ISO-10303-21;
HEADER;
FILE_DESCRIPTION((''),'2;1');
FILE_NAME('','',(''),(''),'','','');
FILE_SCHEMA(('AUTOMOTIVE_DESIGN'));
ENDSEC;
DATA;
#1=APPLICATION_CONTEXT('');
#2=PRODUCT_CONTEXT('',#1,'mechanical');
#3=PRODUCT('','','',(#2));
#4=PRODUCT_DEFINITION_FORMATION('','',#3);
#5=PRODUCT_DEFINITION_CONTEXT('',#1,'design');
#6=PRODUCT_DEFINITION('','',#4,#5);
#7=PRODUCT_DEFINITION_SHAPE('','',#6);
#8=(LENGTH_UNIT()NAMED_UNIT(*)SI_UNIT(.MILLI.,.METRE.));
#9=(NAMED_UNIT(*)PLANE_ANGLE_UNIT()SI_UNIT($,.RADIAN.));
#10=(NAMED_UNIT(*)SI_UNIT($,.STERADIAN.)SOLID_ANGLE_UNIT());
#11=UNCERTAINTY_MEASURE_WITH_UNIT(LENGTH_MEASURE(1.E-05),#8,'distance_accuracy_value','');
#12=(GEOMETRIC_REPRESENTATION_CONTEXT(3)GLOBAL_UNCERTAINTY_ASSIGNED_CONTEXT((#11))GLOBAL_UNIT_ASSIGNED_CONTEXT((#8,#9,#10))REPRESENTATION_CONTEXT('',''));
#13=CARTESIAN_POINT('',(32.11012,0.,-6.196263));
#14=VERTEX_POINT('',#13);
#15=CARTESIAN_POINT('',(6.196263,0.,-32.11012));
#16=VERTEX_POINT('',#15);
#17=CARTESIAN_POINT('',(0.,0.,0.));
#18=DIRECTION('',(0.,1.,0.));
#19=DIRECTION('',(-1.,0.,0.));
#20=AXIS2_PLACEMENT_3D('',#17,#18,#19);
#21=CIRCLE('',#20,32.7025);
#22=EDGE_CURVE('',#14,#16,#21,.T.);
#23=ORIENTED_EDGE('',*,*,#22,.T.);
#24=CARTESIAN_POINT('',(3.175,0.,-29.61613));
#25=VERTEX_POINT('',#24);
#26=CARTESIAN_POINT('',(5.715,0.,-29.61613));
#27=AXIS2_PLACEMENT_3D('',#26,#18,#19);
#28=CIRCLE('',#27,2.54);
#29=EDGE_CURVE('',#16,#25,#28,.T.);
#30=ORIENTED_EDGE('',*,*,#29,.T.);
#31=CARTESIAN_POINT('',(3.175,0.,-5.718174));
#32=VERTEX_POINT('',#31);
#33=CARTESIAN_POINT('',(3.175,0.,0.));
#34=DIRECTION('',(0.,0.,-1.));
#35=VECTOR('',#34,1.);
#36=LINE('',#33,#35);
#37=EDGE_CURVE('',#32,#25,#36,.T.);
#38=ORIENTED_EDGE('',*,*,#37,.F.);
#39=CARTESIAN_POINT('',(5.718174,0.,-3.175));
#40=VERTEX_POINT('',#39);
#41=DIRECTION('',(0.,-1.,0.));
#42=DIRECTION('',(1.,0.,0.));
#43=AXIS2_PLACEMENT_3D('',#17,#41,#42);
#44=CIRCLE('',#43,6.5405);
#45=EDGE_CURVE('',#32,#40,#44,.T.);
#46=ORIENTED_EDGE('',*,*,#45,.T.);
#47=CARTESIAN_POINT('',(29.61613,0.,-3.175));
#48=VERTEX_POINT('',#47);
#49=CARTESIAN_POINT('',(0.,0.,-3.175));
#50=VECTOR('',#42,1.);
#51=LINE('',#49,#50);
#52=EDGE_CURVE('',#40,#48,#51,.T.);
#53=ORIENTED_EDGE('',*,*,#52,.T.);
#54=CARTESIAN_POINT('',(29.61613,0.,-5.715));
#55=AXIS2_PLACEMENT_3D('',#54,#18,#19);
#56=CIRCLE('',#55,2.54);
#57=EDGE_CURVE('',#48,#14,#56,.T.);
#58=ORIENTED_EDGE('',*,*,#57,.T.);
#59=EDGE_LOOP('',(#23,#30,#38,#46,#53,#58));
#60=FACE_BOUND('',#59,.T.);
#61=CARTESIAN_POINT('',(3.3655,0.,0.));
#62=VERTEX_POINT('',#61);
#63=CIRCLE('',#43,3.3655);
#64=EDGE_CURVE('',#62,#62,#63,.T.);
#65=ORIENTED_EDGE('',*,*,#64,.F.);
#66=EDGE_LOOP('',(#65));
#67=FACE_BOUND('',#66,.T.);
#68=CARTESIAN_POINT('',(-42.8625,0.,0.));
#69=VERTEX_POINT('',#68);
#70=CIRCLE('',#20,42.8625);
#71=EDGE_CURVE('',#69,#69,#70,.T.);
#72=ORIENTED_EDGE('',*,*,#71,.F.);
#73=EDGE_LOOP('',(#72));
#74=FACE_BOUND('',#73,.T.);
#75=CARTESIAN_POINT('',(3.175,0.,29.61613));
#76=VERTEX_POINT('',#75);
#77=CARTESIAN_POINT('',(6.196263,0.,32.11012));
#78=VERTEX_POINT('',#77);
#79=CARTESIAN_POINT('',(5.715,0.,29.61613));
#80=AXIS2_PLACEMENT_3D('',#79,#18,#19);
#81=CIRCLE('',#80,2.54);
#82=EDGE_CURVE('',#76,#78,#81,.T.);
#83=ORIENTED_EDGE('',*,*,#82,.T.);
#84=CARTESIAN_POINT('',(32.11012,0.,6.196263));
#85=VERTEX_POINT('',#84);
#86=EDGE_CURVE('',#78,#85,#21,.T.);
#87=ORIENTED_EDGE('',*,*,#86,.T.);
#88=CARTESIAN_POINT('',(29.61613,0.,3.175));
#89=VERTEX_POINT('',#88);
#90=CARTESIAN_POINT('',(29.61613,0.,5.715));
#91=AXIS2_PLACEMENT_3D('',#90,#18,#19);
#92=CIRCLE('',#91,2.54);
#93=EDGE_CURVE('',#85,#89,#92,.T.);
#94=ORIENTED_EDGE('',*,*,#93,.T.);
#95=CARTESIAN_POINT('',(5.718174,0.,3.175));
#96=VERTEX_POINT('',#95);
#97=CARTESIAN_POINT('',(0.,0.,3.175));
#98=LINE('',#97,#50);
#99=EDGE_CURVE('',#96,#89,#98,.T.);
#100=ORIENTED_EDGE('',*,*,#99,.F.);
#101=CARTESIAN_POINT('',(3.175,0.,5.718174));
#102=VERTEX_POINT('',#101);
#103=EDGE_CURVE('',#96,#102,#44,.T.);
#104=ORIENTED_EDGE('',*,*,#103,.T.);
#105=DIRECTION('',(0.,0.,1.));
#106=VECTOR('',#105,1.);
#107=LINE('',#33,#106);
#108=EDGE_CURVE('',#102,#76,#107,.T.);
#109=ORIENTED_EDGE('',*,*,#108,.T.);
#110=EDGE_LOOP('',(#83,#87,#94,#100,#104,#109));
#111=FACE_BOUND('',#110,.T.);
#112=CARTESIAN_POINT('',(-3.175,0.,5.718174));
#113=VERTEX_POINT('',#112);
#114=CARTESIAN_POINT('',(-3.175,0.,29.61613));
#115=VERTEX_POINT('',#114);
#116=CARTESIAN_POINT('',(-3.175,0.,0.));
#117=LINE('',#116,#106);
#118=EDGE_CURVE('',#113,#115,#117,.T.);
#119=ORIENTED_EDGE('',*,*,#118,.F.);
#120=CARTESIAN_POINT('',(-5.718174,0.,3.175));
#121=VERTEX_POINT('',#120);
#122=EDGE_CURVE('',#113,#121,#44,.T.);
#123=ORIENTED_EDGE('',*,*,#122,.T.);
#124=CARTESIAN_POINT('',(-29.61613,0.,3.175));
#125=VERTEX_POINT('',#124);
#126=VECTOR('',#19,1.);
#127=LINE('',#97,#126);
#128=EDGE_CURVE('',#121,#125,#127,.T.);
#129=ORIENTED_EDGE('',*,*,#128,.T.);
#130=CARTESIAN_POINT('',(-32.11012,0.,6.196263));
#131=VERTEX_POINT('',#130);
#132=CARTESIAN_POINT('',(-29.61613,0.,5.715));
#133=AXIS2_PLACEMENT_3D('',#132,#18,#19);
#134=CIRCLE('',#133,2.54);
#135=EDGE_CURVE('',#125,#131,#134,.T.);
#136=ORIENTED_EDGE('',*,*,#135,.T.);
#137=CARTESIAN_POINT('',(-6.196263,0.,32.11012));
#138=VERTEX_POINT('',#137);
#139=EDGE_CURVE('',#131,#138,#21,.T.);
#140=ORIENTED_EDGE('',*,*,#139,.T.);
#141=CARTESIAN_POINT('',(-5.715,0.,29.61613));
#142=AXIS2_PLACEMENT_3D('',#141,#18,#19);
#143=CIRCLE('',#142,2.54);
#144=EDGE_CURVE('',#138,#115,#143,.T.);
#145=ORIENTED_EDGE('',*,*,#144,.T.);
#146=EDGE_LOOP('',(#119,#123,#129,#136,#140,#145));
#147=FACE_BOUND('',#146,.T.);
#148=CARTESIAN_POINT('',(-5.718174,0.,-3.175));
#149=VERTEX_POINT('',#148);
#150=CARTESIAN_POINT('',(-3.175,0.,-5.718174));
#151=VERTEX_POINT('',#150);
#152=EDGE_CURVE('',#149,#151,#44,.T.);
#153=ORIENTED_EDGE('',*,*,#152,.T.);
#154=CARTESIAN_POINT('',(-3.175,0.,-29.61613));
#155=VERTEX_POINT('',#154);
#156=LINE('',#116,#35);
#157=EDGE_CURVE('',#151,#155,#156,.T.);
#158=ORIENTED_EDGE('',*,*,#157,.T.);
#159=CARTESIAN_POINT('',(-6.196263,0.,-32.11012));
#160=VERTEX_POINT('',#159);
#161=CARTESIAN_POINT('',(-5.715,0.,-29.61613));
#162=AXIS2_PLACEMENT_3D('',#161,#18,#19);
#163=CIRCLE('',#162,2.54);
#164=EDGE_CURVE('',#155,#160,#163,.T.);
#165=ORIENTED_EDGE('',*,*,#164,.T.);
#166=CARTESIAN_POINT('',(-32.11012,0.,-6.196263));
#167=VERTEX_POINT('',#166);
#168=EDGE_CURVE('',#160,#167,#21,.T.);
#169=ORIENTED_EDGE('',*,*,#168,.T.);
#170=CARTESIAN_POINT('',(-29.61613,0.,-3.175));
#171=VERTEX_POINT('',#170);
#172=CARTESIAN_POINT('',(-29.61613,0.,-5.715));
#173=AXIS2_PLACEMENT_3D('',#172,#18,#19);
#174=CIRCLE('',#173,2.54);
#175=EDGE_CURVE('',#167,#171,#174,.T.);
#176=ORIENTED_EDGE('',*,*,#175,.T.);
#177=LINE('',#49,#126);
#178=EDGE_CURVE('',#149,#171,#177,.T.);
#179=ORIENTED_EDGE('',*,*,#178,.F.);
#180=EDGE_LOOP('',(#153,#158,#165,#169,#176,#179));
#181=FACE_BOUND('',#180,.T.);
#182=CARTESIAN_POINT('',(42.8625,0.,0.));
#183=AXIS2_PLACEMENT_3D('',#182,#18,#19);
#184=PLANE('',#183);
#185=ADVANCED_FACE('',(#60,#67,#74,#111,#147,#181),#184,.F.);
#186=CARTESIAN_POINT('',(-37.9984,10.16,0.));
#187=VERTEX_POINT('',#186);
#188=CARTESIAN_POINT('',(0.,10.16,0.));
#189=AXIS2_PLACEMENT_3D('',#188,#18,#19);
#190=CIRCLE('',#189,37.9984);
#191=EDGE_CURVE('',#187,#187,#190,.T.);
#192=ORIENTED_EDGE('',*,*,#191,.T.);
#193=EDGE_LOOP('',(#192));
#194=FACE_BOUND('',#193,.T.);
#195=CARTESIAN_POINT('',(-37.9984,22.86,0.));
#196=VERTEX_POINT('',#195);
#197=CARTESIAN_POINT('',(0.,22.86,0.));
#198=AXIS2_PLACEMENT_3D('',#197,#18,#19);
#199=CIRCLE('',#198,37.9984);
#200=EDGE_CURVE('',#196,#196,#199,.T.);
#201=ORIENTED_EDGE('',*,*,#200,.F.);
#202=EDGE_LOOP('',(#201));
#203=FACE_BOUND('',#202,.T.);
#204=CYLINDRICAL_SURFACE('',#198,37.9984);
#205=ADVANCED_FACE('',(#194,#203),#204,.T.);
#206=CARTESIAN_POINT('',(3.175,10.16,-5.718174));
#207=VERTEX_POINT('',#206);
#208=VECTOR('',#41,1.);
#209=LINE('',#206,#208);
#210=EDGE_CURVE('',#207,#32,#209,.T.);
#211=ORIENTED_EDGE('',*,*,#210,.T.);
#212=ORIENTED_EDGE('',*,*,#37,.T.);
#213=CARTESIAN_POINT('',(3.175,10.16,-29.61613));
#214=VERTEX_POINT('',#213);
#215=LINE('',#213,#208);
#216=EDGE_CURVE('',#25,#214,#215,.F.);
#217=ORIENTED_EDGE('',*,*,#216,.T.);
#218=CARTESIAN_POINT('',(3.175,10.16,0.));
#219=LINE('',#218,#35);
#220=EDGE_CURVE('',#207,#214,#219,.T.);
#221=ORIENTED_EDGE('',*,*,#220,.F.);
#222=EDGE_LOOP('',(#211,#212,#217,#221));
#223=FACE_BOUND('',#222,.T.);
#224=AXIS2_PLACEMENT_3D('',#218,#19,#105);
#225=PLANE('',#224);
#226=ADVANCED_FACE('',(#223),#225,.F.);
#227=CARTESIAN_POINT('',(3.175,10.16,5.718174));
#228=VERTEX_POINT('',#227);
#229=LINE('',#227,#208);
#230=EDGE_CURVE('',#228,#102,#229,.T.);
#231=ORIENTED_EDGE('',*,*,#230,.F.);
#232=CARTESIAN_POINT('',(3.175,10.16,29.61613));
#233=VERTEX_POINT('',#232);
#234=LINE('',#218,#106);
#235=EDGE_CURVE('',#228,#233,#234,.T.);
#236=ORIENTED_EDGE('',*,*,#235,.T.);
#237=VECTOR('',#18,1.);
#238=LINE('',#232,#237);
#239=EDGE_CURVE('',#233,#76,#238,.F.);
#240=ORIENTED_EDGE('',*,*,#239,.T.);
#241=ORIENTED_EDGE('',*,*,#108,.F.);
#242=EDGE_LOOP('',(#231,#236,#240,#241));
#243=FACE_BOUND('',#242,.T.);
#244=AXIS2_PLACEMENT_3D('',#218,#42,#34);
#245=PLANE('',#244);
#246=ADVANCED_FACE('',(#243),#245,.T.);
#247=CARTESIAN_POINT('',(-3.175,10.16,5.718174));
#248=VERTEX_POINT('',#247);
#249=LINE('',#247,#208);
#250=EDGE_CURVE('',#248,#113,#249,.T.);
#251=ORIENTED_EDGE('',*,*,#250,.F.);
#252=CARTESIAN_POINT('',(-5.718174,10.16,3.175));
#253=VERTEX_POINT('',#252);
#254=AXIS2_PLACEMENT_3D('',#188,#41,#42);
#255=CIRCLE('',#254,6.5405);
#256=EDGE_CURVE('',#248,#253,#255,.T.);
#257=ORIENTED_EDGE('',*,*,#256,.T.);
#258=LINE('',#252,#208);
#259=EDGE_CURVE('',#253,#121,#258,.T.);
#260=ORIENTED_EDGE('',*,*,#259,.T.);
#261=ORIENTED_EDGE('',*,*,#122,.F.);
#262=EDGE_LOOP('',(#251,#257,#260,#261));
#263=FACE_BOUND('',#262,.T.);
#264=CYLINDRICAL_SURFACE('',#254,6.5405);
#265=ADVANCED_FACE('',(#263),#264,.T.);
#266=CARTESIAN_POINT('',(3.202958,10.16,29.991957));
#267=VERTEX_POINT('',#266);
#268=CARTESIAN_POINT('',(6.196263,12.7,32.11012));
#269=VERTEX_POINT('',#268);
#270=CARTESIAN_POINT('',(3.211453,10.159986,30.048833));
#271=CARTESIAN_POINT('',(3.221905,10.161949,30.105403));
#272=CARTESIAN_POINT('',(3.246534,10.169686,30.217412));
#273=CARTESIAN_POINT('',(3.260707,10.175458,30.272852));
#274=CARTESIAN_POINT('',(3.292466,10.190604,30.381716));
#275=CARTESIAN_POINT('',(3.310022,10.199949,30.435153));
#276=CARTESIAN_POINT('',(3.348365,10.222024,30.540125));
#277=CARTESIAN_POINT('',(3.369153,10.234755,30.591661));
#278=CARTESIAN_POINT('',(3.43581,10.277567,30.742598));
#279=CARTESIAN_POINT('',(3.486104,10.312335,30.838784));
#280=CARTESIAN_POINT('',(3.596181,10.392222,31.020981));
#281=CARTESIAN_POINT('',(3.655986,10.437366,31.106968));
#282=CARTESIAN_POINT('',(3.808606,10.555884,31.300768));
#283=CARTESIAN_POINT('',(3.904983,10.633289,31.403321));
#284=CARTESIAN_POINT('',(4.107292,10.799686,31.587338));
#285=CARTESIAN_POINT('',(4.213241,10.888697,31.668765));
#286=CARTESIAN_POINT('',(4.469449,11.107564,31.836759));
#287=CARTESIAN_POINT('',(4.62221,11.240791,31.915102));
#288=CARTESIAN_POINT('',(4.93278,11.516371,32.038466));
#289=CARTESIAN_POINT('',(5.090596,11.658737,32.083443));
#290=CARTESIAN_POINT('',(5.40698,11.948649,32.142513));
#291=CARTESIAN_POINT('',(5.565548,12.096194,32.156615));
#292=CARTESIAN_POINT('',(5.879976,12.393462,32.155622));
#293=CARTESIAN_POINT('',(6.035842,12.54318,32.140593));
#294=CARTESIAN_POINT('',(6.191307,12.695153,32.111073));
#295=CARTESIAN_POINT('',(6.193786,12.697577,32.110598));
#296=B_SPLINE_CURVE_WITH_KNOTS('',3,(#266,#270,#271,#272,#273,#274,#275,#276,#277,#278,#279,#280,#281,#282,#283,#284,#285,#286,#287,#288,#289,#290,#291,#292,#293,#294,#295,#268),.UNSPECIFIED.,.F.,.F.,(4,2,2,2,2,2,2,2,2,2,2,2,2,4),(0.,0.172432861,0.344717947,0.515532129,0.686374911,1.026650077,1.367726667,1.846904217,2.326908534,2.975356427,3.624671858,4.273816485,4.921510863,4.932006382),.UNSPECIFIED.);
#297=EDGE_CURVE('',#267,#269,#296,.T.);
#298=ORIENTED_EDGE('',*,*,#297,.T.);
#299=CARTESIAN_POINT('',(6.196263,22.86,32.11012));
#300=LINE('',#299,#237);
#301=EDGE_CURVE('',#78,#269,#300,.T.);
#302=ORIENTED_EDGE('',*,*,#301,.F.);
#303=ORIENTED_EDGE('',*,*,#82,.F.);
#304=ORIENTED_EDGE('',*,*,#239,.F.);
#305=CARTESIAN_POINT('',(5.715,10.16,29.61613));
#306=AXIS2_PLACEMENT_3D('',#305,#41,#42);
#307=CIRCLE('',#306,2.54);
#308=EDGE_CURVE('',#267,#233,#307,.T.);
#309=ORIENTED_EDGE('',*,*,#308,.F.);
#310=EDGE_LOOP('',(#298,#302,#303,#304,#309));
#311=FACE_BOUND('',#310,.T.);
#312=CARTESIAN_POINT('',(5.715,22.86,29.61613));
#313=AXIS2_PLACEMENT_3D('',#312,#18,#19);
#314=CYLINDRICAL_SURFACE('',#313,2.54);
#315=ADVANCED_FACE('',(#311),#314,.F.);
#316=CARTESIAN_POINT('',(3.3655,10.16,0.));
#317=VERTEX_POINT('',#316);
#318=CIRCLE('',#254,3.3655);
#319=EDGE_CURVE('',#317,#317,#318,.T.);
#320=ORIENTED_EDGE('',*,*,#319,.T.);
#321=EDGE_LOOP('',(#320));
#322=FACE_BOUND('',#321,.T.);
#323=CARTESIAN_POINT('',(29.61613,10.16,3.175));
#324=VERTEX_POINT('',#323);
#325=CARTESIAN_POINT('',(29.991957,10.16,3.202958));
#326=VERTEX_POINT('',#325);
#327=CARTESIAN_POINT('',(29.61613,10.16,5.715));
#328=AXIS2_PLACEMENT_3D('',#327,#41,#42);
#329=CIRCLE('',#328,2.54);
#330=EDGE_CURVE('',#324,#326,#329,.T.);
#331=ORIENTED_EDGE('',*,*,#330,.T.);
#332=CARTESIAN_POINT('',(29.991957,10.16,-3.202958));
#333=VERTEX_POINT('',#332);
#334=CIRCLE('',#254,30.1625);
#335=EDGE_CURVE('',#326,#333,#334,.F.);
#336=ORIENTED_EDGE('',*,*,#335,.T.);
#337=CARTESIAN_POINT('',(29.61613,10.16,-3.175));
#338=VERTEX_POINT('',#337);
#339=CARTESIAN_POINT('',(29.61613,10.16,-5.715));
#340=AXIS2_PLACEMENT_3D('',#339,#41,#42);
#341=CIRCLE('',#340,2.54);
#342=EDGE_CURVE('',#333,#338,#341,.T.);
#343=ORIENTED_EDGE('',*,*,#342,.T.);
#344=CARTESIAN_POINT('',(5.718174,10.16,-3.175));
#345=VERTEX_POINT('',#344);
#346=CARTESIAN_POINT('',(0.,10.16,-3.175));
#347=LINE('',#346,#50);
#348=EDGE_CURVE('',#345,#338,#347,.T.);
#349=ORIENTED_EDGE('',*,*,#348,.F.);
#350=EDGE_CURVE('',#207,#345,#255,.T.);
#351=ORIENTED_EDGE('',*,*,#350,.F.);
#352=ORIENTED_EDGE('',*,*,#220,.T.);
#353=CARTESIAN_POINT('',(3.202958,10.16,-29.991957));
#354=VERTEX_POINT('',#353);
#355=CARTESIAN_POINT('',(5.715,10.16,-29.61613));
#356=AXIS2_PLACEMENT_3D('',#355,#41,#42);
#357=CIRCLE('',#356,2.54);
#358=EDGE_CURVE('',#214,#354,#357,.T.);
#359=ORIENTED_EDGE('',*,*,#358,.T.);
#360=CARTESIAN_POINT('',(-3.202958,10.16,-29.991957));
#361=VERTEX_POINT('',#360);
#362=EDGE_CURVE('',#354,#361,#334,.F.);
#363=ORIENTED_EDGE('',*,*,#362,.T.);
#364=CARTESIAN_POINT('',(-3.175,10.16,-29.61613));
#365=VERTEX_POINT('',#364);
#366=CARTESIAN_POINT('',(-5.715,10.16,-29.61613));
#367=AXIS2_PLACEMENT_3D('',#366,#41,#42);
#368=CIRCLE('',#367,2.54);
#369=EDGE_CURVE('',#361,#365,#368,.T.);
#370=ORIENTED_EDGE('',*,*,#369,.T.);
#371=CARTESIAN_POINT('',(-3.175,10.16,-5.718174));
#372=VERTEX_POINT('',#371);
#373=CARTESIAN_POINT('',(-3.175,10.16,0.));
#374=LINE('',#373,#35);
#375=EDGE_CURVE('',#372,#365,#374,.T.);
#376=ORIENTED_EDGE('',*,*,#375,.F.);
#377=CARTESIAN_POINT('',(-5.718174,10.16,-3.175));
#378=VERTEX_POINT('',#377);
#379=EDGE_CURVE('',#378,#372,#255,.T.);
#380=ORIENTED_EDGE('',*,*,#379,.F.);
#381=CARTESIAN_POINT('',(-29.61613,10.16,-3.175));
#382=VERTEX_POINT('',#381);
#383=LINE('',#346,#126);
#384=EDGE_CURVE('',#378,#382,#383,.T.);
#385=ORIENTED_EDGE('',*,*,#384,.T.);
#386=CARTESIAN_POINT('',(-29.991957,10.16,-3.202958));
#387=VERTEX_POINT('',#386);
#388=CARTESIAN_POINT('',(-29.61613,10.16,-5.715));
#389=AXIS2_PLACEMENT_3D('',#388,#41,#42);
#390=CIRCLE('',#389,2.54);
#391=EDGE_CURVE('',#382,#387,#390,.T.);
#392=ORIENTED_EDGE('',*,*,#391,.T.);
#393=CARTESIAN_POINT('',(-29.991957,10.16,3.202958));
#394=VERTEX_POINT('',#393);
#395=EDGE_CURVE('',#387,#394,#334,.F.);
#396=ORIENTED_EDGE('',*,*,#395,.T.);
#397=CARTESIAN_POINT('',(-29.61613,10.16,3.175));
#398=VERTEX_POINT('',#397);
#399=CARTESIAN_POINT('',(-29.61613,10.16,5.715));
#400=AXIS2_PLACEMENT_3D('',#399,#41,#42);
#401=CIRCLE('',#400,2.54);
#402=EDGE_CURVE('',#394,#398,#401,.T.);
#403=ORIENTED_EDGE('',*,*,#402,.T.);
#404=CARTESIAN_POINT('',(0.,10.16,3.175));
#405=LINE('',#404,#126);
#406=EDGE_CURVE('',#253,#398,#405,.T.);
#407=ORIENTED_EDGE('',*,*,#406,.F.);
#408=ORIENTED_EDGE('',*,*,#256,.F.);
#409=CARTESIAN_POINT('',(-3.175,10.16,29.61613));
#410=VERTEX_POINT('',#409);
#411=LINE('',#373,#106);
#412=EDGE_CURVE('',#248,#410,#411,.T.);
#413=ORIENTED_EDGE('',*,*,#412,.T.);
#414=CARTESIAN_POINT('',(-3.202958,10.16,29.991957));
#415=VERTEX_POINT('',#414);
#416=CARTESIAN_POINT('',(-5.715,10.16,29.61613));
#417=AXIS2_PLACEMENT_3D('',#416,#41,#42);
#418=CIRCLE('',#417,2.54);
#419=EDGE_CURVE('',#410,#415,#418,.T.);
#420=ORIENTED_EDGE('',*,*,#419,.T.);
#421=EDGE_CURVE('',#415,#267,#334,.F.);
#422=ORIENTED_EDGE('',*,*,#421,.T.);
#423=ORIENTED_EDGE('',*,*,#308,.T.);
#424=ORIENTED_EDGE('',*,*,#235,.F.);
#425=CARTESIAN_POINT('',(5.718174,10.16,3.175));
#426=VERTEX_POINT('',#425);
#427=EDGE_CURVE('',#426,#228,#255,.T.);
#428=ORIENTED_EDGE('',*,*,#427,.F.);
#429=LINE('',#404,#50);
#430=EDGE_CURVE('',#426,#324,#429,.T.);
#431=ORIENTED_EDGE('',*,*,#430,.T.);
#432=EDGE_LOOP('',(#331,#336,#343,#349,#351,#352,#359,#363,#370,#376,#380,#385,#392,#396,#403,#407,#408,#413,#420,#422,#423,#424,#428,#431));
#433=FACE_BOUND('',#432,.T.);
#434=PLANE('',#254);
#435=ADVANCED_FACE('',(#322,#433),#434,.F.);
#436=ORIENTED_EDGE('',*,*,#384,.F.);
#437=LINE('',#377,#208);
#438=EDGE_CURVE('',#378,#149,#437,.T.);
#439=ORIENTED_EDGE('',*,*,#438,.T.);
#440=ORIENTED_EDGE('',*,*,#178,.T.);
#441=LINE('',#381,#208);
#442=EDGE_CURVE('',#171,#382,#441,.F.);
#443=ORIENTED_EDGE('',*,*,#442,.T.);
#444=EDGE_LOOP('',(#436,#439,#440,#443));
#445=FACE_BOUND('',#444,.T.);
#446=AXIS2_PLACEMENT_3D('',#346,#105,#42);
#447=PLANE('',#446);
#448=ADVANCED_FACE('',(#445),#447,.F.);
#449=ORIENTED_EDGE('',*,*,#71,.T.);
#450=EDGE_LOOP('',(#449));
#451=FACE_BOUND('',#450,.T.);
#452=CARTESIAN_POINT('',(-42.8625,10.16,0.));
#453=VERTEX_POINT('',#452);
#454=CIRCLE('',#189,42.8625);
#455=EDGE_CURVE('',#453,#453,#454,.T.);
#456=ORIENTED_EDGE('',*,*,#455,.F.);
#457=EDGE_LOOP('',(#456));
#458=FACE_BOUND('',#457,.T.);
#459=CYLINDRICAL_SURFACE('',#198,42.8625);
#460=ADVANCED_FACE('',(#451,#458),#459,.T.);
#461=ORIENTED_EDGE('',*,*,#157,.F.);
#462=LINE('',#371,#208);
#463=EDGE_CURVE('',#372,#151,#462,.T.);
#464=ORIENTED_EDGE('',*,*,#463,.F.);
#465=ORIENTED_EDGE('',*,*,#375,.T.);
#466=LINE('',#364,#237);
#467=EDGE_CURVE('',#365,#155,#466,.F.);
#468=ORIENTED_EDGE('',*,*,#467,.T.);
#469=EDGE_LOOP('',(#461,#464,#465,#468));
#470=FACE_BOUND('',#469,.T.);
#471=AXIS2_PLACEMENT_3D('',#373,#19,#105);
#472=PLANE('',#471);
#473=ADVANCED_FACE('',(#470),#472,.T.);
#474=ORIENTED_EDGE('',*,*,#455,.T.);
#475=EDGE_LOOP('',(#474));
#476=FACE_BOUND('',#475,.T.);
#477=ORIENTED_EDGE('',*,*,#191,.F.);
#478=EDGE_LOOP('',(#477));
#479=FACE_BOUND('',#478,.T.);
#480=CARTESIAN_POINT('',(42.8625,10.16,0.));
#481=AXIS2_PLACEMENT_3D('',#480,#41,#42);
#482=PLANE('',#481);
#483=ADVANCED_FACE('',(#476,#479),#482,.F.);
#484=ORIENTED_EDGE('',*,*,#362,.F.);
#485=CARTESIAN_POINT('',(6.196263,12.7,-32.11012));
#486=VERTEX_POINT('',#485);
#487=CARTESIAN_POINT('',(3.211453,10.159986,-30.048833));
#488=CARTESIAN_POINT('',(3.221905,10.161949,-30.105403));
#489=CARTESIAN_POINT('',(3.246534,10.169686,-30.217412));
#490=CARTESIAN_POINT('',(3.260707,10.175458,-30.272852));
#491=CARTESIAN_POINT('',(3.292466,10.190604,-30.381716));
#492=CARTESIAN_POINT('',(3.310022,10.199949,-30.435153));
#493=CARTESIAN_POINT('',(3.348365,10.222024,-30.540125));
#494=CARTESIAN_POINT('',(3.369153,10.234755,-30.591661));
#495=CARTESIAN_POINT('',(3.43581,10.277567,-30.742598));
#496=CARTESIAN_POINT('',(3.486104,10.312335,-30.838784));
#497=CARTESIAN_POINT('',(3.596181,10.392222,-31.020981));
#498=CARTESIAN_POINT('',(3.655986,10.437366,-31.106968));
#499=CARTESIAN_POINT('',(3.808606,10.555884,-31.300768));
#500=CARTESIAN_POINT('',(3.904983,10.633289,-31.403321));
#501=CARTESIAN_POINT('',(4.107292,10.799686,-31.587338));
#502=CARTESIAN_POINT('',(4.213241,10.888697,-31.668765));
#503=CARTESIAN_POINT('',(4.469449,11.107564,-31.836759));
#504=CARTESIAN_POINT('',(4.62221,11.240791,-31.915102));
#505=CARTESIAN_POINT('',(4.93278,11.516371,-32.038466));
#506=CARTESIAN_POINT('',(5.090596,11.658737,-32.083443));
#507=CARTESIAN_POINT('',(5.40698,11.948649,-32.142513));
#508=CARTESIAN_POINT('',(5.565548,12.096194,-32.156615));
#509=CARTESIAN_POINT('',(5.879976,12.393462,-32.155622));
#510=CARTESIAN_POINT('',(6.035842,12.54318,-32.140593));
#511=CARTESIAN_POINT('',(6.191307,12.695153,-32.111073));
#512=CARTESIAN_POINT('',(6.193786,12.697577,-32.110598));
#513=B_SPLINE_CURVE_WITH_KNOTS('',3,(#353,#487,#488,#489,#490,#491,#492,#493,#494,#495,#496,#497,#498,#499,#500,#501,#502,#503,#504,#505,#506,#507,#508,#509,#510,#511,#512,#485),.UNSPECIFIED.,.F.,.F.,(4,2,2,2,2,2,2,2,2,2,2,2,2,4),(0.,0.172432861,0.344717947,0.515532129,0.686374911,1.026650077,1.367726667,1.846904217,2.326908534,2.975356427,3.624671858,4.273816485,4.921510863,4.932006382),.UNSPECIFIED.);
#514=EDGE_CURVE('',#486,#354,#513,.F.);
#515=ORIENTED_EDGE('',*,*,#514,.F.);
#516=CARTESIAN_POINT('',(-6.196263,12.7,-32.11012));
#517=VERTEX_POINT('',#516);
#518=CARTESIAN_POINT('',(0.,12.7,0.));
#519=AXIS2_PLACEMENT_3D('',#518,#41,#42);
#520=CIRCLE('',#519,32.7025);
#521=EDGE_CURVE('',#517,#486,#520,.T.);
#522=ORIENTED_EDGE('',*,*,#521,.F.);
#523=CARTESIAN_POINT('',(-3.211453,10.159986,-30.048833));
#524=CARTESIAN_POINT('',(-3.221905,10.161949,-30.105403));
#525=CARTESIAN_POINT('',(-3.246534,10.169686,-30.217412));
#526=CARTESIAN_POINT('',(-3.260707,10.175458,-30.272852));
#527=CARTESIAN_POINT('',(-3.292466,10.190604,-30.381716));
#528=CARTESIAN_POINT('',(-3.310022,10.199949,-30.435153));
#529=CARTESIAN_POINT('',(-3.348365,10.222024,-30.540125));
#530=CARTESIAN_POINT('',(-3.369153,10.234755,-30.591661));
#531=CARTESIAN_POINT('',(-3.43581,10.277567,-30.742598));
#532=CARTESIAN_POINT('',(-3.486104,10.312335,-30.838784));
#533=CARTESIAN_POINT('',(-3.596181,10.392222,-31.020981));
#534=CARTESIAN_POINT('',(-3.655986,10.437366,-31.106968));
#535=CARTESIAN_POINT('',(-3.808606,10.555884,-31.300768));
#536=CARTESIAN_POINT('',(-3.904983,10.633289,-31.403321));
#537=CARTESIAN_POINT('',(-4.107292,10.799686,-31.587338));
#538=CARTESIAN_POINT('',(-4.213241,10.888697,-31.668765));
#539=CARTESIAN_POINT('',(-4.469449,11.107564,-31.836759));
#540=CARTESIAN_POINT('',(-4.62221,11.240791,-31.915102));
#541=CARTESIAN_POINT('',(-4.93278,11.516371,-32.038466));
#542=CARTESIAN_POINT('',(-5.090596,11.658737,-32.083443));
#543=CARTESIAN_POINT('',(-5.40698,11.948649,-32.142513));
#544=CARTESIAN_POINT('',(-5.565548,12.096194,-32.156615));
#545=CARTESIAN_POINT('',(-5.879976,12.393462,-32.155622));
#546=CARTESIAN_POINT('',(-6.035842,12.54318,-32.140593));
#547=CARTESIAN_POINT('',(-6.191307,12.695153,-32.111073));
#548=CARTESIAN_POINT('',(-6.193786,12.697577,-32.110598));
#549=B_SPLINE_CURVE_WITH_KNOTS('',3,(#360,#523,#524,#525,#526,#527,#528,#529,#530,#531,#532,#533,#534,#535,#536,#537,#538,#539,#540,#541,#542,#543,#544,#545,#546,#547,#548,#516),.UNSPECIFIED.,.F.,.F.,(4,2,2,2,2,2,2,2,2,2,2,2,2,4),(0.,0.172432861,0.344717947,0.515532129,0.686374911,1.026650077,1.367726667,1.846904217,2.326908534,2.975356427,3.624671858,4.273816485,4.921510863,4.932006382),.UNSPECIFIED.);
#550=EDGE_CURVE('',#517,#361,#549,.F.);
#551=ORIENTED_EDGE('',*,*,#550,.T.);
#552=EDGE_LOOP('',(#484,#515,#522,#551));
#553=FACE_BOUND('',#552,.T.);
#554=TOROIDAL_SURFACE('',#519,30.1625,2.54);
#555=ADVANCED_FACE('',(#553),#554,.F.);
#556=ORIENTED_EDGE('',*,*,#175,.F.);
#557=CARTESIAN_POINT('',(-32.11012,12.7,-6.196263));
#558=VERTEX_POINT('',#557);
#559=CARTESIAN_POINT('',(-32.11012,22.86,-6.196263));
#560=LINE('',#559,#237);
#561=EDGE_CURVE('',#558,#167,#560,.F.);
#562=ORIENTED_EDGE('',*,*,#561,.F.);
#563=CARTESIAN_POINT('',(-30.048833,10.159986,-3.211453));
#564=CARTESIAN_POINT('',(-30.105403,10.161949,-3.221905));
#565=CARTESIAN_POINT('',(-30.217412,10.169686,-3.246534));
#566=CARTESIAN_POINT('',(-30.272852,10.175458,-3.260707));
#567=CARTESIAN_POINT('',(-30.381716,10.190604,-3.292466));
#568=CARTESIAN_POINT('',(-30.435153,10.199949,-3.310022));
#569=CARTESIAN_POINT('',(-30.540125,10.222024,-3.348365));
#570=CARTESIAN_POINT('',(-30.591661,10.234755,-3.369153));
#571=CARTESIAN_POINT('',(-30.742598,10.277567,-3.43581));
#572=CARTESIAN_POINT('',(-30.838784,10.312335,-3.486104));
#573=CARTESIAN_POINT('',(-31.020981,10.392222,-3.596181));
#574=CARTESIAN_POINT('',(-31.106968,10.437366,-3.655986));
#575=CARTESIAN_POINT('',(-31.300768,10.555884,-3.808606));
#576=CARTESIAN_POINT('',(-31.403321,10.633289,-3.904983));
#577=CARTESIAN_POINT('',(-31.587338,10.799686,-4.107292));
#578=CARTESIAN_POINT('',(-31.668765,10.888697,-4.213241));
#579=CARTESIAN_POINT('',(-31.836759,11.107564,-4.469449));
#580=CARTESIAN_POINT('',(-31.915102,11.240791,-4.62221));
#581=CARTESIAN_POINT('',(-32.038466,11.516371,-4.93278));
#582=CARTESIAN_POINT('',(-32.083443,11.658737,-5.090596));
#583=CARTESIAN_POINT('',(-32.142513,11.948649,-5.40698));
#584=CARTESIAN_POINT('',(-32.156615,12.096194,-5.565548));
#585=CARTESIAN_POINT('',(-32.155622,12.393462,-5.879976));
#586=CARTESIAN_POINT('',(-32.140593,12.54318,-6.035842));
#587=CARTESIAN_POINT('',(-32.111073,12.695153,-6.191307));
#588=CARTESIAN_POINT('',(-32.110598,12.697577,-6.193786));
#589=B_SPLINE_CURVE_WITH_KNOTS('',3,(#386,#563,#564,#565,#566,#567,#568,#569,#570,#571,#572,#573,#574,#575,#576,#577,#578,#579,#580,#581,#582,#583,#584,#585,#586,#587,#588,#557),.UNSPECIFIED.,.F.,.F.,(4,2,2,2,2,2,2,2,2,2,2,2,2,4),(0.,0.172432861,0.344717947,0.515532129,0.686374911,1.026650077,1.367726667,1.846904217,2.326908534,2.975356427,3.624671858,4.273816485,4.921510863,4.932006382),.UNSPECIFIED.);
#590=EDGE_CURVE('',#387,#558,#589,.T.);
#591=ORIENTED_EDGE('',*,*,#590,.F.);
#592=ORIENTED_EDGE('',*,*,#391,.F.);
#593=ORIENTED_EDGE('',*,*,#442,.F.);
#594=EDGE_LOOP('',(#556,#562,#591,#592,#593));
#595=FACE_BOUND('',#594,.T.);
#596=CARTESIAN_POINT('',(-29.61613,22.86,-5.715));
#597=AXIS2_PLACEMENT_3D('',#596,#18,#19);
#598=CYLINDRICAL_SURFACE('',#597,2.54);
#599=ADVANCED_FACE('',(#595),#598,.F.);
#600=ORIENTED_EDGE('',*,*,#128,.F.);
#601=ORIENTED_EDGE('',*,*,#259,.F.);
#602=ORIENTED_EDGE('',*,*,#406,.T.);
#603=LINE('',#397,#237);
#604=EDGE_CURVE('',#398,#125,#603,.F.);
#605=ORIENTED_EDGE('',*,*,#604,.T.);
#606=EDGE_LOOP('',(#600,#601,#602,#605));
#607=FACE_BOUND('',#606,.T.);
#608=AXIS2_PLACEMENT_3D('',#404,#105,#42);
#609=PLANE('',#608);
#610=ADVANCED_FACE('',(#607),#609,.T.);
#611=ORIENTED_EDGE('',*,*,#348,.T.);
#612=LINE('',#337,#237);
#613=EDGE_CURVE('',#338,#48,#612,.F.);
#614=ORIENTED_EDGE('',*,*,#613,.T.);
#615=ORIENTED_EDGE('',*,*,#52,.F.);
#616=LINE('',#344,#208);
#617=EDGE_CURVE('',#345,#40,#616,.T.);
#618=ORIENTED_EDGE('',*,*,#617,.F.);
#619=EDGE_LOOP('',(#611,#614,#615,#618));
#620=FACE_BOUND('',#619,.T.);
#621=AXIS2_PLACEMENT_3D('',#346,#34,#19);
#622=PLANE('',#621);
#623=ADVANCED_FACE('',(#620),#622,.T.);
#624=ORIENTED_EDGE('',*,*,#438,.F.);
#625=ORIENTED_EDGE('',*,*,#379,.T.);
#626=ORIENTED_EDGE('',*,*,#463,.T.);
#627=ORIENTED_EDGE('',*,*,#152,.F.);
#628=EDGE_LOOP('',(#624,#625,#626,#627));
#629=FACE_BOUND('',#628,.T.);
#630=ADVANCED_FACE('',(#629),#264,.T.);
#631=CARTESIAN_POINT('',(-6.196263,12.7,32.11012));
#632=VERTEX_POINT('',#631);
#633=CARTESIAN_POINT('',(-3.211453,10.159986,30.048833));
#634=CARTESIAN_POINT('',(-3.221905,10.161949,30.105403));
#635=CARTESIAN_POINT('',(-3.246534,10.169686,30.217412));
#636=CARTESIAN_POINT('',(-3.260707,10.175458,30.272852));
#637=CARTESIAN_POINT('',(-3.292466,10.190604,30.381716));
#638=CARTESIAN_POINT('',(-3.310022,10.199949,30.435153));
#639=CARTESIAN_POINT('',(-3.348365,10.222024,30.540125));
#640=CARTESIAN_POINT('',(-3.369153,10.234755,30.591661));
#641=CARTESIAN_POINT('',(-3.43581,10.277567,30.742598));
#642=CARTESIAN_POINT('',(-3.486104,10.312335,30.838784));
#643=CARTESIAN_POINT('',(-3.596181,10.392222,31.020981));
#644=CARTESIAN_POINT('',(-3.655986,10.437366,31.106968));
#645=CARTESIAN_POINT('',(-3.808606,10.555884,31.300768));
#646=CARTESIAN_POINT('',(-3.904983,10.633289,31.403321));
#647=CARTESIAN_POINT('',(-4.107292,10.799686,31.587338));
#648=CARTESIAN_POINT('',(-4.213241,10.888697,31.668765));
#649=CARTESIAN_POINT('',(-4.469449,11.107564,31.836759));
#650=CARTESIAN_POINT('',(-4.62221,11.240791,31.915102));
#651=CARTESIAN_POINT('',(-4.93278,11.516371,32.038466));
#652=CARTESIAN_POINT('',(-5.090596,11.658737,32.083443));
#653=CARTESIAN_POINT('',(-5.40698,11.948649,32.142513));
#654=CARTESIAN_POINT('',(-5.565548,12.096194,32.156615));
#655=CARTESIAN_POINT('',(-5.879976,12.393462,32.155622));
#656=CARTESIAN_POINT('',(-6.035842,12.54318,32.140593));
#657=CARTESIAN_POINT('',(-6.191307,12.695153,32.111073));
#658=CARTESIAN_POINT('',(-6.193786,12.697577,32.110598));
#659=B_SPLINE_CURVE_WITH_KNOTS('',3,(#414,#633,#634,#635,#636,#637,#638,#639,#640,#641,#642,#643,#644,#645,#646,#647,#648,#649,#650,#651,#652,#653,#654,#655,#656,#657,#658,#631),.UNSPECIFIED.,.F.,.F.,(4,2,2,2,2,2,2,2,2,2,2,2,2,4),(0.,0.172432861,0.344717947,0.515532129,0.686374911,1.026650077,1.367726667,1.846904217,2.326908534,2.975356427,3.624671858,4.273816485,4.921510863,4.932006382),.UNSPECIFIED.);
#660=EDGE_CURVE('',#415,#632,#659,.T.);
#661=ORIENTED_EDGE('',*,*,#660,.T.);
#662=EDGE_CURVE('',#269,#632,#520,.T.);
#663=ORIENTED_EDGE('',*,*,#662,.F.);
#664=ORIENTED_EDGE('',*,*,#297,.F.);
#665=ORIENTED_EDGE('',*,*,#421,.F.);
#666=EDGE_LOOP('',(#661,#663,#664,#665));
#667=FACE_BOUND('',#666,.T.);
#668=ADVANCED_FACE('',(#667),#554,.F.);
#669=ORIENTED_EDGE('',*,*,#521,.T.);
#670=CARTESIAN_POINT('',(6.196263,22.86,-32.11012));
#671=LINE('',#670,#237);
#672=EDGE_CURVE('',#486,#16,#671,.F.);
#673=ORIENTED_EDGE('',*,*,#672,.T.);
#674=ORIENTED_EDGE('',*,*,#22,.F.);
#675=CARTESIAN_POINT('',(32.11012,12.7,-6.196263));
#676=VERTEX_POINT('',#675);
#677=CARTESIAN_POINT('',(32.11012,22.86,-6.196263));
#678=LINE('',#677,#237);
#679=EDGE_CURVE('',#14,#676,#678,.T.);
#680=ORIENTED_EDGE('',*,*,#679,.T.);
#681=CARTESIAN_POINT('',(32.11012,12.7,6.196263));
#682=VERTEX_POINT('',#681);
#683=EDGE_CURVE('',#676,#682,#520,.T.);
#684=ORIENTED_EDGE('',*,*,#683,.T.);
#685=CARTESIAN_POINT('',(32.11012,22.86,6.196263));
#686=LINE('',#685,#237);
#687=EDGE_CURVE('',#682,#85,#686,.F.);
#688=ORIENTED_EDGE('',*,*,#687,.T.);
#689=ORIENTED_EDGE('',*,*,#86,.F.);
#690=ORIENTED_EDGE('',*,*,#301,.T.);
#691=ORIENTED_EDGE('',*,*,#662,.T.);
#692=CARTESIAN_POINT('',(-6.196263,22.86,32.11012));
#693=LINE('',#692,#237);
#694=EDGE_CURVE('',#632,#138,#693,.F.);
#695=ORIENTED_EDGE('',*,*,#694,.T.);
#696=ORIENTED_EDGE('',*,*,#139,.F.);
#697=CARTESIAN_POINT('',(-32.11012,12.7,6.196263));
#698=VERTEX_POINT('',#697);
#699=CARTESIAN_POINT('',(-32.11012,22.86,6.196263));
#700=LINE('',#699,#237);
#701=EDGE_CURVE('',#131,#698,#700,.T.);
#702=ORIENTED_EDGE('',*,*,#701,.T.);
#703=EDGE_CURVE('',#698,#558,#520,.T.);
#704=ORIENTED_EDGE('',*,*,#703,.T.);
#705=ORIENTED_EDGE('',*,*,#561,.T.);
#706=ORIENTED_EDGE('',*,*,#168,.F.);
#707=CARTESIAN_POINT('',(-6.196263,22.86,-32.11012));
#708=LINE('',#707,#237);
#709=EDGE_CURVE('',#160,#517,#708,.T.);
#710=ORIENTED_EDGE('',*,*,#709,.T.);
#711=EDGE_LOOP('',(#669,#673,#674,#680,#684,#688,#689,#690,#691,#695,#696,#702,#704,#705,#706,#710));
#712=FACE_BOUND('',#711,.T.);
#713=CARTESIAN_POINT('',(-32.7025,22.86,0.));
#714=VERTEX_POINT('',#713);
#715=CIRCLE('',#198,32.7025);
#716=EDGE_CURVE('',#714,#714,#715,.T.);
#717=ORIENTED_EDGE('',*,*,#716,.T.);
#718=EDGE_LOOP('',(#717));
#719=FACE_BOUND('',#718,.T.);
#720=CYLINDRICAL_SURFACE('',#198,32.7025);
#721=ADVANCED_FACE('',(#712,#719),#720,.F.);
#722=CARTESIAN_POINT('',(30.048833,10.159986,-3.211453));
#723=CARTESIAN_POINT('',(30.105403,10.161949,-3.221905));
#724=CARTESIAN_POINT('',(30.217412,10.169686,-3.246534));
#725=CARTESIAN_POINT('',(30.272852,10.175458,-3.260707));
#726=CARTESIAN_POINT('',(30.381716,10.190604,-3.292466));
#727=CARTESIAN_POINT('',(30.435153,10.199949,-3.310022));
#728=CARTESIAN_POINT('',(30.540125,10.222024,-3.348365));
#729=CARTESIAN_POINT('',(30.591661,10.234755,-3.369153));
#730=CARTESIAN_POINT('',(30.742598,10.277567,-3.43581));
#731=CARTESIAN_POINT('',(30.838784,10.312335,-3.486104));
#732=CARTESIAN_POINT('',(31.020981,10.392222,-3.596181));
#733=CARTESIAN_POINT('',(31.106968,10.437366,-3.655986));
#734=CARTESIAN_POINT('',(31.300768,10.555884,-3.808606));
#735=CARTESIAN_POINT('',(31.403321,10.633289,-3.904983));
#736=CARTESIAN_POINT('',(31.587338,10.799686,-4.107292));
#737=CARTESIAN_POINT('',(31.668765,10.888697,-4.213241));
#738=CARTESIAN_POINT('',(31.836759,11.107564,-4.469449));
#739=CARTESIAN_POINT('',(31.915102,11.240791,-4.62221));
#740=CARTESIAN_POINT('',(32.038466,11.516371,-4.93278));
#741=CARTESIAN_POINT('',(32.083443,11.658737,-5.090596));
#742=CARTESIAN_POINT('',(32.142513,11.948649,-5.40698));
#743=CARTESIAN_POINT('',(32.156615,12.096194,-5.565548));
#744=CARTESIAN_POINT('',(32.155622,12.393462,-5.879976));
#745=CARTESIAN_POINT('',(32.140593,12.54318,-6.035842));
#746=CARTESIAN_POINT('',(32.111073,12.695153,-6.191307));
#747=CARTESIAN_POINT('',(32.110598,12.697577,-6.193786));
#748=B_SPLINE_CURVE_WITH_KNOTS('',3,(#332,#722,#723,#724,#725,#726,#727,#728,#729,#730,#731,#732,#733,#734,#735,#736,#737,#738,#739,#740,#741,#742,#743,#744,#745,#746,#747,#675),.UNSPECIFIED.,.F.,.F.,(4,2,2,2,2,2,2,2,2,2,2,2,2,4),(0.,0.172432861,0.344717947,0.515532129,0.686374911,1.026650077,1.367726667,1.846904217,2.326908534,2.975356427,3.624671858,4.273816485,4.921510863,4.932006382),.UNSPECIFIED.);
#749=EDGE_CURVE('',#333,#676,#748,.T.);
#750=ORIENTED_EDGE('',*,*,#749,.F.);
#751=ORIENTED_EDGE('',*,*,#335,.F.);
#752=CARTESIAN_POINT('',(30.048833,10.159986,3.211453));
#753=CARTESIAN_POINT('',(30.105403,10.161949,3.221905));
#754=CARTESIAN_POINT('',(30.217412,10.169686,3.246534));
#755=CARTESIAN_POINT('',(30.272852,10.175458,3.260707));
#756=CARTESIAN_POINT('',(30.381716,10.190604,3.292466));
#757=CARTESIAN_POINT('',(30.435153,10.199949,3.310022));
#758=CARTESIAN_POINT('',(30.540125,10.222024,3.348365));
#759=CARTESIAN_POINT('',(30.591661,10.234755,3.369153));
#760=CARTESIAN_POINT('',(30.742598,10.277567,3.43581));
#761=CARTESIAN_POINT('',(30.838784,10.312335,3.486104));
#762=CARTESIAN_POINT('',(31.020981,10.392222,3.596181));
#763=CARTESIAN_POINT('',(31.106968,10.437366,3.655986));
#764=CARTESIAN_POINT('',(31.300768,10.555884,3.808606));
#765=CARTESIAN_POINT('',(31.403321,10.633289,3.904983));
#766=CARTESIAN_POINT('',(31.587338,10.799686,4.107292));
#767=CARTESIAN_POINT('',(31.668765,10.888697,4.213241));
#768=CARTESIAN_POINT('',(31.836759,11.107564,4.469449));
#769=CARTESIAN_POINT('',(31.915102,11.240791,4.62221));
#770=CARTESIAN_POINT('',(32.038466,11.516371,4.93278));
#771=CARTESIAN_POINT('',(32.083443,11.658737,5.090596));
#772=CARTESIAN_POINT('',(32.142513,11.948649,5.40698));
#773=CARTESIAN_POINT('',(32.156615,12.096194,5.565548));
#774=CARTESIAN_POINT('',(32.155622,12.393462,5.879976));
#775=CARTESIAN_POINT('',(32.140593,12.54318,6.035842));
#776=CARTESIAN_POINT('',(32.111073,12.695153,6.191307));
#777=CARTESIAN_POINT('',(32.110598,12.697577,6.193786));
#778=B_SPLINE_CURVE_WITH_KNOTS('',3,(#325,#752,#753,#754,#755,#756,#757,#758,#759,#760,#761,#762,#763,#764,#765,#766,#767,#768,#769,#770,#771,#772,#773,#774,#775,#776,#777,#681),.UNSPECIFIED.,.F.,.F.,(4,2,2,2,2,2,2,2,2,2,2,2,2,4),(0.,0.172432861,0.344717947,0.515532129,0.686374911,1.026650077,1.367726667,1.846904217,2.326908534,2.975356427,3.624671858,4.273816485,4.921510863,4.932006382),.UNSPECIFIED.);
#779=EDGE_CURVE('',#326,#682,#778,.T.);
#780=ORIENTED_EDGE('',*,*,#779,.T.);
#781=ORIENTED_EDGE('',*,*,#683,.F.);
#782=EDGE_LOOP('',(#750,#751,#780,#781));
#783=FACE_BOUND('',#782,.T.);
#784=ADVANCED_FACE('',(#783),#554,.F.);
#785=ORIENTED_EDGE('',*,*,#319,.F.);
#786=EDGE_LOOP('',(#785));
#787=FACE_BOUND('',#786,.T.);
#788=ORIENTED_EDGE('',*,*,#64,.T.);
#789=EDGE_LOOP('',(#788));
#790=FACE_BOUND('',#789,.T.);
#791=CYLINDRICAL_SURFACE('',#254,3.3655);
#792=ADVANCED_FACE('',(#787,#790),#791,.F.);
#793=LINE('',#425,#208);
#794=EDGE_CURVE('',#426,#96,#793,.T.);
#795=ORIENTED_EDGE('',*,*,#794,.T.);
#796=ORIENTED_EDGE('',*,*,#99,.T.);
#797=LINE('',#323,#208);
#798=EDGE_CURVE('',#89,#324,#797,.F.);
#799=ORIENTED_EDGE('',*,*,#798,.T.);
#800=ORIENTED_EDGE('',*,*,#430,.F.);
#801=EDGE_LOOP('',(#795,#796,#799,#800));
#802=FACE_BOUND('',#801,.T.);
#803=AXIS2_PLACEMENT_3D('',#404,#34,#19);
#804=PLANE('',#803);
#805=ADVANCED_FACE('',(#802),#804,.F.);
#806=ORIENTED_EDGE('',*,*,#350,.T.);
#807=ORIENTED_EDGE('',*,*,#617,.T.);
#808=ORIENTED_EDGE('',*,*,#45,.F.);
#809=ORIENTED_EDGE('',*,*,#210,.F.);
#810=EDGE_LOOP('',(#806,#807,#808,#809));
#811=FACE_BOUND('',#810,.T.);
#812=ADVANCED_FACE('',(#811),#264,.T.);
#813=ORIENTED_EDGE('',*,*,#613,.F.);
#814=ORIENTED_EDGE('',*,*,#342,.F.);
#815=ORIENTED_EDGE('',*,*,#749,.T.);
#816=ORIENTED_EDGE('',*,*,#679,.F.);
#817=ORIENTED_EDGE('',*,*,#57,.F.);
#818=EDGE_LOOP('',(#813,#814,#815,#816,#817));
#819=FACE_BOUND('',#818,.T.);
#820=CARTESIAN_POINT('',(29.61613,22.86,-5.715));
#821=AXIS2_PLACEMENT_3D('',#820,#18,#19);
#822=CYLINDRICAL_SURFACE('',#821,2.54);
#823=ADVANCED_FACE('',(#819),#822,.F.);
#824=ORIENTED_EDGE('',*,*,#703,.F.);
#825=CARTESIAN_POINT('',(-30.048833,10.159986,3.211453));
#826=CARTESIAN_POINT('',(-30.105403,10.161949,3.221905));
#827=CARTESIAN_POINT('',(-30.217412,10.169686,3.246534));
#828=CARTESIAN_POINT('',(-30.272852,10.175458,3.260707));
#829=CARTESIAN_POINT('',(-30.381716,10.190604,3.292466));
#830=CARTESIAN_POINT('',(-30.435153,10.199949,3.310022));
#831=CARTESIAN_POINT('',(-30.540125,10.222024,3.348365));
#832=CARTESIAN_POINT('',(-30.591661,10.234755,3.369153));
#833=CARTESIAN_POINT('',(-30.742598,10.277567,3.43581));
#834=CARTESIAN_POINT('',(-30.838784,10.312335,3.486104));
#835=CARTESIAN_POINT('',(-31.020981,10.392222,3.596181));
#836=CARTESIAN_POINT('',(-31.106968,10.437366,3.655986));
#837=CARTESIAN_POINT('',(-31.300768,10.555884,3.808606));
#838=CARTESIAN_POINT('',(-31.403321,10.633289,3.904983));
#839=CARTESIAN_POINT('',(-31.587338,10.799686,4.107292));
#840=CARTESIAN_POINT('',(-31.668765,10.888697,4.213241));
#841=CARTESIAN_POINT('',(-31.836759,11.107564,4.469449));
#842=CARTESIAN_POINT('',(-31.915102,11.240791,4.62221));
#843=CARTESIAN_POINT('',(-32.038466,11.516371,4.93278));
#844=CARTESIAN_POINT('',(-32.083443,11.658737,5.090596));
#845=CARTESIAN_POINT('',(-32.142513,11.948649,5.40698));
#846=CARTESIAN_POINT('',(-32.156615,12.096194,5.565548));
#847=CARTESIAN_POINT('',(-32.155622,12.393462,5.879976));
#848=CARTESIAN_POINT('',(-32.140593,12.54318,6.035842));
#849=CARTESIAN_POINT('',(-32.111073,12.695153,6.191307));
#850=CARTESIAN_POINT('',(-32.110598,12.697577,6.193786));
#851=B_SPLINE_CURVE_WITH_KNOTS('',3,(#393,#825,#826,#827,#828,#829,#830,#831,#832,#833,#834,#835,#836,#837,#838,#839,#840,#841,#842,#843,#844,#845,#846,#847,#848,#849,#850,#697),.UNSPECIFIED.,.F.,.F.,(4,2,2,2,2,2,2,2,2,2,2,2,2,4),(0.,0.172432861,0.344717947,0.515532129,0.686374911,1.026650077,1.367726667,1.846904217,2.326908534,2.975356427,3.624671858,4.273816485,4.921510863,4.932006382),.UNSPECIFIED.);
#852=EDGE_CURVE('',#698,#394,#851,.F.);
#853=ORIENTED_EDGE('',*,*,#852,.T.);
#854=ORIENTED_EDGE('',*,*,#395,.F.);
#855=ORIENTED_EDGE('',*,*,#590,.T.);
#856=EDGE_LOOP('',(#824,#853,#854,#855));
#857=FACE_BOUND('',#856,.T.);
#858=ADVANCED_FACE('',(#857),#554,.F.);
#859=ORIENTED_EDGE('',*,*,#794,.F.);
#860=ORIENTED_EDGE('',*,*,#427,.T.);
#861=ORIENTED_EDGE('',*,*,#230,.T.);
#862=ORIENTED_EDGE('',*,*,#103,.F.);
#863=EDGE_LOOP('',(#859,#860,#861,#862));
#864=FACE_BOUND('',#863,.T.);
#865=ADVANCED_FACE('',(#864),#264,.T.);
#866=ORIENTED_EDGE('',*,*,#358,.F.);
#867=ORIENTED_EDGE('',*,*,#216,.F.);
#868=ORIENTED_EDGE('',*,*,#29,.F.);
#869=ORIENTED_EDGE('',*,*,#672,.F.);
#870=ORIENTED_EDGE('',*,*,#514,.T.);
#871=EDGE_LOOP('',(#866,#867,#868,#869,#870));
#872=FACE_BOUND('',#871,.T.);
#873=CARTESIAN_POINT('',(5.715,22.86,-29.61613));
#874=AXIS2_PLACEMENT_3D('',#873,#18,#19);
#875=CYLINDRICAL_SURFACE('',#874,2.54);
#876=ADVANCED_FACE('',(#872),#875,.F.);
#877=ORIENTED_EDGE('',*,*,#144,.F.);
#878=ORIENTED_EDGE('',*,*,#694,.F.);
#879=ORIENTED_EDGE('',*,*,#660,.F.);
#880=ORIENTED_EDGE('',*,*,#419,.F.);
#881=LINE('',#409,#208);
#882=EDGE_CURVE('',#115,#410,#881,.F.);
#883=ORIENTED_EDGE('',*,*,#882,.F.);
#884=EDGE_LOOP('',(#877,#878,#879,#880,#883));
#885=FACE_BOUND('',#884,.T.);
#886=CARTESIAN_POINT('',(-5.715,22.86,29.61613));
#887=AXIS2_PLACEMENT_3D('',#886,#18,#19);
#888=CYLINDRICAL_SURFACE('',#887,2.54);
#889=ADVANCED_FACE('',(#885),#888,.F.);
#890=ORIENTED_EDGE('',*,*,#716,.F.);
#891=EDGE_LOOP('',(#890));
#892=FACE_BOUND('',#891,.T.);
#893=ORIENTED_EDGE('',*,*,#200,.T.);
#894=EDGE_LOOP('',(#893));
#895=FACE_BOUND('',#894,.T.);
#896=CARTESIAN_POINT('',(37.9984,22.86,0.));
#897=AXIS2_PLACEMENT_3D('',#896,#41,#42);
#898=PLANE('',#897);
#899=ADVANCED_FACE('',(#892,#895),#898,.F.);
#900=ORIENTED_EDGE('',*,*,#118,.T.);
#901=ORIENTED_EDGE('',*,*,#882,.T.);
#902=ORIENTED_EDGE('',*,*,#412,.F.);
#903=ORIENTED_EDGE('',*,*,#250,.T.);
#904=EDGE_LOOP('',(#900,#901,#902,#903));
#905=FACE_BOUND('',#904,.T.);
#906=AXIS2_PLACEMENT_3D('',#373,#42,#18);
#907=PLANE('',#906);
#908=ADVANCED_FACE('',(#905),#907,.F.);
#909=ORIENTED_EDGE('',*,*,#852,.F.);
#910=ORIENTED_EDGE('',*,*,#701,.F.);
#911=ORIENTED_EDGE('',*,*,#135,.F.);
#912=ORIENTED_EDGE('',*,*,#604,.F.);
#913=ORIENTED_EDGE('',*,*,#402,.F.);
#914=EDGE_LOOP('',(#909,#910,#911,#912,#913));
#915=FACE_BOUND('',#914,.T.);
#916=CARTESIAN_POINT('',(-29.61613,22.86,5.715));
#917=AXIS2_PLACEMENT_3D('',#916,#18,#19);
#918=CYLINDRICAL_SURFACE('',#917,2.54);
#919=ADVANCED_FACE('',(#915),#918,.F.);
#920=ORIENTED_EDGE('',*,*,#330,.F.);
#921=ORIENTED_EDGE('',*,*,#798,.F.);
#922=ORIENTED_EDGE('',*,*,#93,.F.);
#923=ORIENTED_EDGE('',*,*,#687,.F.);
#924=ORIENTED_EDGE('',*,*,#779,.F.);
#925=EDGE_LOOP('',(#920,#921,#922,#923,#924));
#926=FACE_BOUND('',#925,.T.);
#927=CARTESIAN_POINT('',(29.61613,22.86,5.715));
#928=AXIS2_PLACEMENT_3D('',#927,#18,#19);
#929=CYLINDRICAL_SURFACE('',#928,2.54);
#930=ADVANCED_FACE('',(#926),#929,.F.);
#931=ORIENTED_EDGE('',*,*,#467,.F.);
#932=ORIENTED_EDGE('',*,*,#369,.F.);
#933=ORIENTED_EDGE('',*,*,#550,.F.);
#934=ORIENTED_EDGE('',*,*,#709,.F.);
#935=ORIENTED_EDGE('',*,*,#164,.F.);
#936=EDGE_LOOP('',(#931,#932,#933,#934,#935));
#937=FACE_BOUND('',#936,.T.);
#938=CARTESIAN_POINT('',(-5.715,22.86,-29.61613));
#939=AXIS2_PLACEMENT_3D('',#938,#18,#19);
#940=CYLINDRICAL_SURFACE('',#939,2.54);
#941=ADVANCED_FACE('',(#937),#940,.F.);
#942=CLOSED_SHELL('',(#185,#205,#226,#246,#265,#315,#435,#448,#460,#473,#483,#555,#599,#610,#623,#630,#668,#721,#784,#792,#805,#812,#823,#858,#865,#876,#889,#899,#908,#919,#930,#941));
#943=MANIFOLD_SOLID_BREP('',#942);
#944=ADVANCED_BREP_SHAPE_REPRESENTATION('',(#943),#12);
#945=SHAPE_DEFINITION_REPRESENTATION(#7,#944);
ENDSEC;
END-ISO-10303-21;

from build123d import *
from build123d.topology import SkipClean

# Parameters (mm, degrees)
SKETCH2_R           = 3.3655
BOSS_EXTRUDE1_DEPTH = 10.16
FILLET1_START       = 10.16
FILLET1_OUTLINE_R   = 32.7025
FILLET1_DEPTH       = 2.5400001
FILLET1_2_DEPTH     = 10.16
FILLET1_4_DEPTH     = 5.080000101


with BuildPart() as part:
    # Sketch1 → Revolve2 (revolve)
    with BuildSketch(Plane.XY, mode=Mode.PRIVATE) as revolve2_sk:
        Polygon((42.8625, 0), (42.8625, 10.16), (37.9984, 10.16), (37.9984, 22.86), (32.7025, 22.86), (32.7025, 0), align=None)
    revolve(revolve2_sk.sketch.rotate(Axis((0, 22.86, 0), (0, -1, 0)), 180), axis=Axis((0, 22.86, 0), (0, -1, 0)))

    # Sketch2 → Boss-Extrude1 (add)
    with BuildSketch(Plane.XZ):
        with BuildLine():
            Line((-3.175, 32.548008868), (-3.175, 5.718174119))
            ThreePointArc((-3.175, 5.718174119), (-4.624831902, 4.624831902), (-5.718174119, 3.175))
            Line((-5.718174119, 3.175), (-32.548008868, 3.175))
            ThreePointArc((-32.548008868, 3.175), (-32.7025, 0), (-32.548008868, -3.175))
            Line((-32.548008868, -3.175), (-5.718174119, -3.175))
            ThreePointArc((-5.718174119, -3.175), (-4.624831902, -4.624831902), (-3.175, -5.718174119))
            Line((-3.175, -5.718174119), (-3.175, -32.548008868))
            ThreePointArc((-3.175, -32.548008868), (0, -32.7025), (3.175, -32.548008868))
            Line((3.175, -32.548008868), (3.175, -5.718174119))
            ThreePointArc((3.175, -5.718174119), (4.624831902, -4.624831902), (5.718174119, -3.175))
            Line((5.718174119, -3.175), (32.548008868, -3.175))
            ThreePointArc((32.548008868, -3.175), (32.663854383, -1.58937822), (32.7025, 0))
            ThreePointArc((32.7025, 0), (32.663854383, 1.58937822), (32.548008868, 3.175))
            Line((32.548008868, 3.175), (5.718174119, 3.175))
            ThreePointArc((5.718174119, 3.175), (4.624831902, 4.624831902), (3.175, 5.718174119))
            Line((3.175, 5.718174119), (3.175, 32.548008868))
            ThreePointArc((3.175, 32.548008868), (0, 32.7025), (-3.175, 32.548008868))
        make_face()
        Circle(SKETCH2_R, mode=Mode.SUBTRACT)
    extrude(amount=-BOSS_EXTRUDE1_DEPTH)

    # Fillet1: read off the stored shape, not the designer's step
    # Fillet1 outline → Fillet1 (add)
    with BuildSketch(Plane(origin=(0, 0, 0), x_dir=(1, 0, 0), z_dir=(0, 1, 0)).offset(FILLET1_START)):
        Circle(FILLET1_OUTLINE_R)
    extrude(amount=FILLET1_DEPTH)

    # Fillet1 2 outline → Fillet1 2 (add)
    with BuildSketch(Plane(origin=(0, 0, 0), x_dir=(1, 0, 0), z_dir=(0, 1, 0))):
        with BuildLine():
            ThreePointArc((-29.616130423, 3.175), (-31.574957677, 4.098028822), (-32.110120354, 6.196263158))
            ThreePointArc((-32.110120354, 6.196263158), (-32.364338806, 4.690744065), (-32.548008868, 3.175))
            Line((-32.548008868, 3.175), (-29.616130423, 3.175))
        make_face()
        with BuildLine():
            ThreePointArc((-3.175, 32.548008868), (-4.690744065, 32.364338806), (-6.196263158, 32.110120354))
            ThreePointArc((-6.196263158, 32.110120354), (-4.098028822, 31.574957677), (-3.175, 29.616130423))
            Line((-3.175, 29.616130423), (-3.175, 32.548008868))
        make_face()
        with BuildLine():
            Line((-29.616130423, -3.175), (-32.548008868, -3.175))
            ThreePointArc((-32.548008868, -3.175), (-32.364338806, -4.690744065), (-32.110120354, -6.196263158))
            ThreePointArc((-32.110120354, -6.196263158), (-31.574957677, -4.098028822), (-29.616130423, -3.175))
        make_face()
        with BuildLine():
            ThreePointArc((6.196263158, 32.110120354), (4.690744065, 32.364338806), (3.175, 32.548008868))
            Line((3.175, 32.548008868), (3.175, 29.616130423))
            ThreePointArc((3.175, 29.616130423), (4.098028822, 31.574957677), (6.196263158, 32.110120354))
        make_face()
        with BuildLine():
            ThreePointArc((-3.175, -29.616130423), (-4.098028822, -31.574957677), (-6.196263158, -32.110120354))
            ThreePointArc((-6.196263158, -32.110120354), (-4.690744065, -32.364338806), (-3.175, -32.548008868))
            Line((-3.175, -32.548008868), (-3.175, -29.616130423))
        make_face()
        with BuildLine():
            ThreePointArc((32.548008868, 3.175), (32.364338806, 4.690744065), (32.110120354, 6.196263158))
            ThreePointArc((32.110120354, 6.196263158), (31.574957677, 4.098028822), (29.616130423, 3.175))
            Line((29.616130423, 3.175), (32.548008868, 3.175))
        make_face()
        with BuildLine():
            Line((3.175, -29.616130423), (3.175, -32.548008868))
            ThreePointArc((3.175, -32.548008868), (4.690744065, -32.364338806), (6.196263158, -32.110120354))
            ThreePointArc((6.196263158, -32.110120354), (4.098028822, -31.574957677), (3.175, -29.616130423))
        make_face()
        with BuildLine():
            ThreePointArc((32.110120354, -6.196263158), (32.364338806, -4.690744065), (32.548008868, -3.175))
            Line((32.548008868, -3.175), (29.616130423, -3.175))
            ThreePointArc((29.616130423, -3.175), (31.574957677, -4.098028822), (32.110120354, -6.196263158))
        make_face()
    extrude(amount=FILLET1_2_DEPTH)

    # Fillet1 3 outline → Fillet1 3 (revolve, cut)
    with BuildSketch(Plane.XY):
        with BuildLine():
            Line((32.7025, 12.7), (0, 12.7))
            Line((0, 12.7), (0, 10.16))
            Line((0, 10.16), (30.1625, 10.16))
            ThreePointArc((30.1625, 10.16), (31.958551224, 10.903948776), (32.7025, 12.7))
        make_face()
    revolve(axis=Axis((0, 0, 0), (0, 1, 0)), mode=Mode.SUBTRACT)

    # Fillet1 4 outline → Fillet1 4 (cut)
    with SkipClean():  # the faces are left unmerged after this step: merging them gives an invalid solid
        with BuildSketch(Plane(origin=(0, 0, 0), x_dir=(1, 0, 0), z_dir=(0, 1, 0)).offset(FILLET1_START)):
            with BuildLine():
                ThreePointArc((29.616130423, 3.175), (31.574957677, 4.098028822), (32.110120354, 6.196263158))
                ThreePointArc((32.110120354, 6.196263158), (23.124159512, 23.124159512), (6.196263158, 32.110120354))
                ThreePointArc((6.196263158, 32.110120354), (4.098028822, 31.574957677), (3.175, 29.616130423))
                Line((3.175, 29.616130423), (3.175000002, 3.175000002))
                Line((3.175000002, 3.175000002), (29.616130423, 3.175))
            make_face()
            with BuildLine():
                Line((-29.616130423, 3.175), (-3.175000002, 3.175000002))
                Line((-3.175000002, 3.175000002), (-3.175, 29.616130423))
                ThreePointArc((-3.175, 29.616130423), (-4.098028822, 31.574957677), (-6.196263158, 32.110120354))
                ThreePointArc((-6.196263158, 32.110120354), (-23.124159512, 23.124159512), (-32.110120354, 6.196263158))
                ThreePointArc((-32.110120354, 6.196263158), (-31.574957677, 4.098028822), (-29.616130423, 3.175))
            make_face()
            with BuildLine():
                Line((29.616130423, -3.175), (3.175000002, -3.175000003))
                Line((3.175000002, -3.175000003), (3.175, -29.616130423))
                ThreePointArc((3.175, -29.616130423), (4.098028822, -31.574957677), (6.196263158, -32.110120354))
                ThreePointArc((6.196263158, -32.110120354), (23.124159512, -23.124159512), (32.110120354, -6.196263158))
                ThreePointArc((32.110120354, -6.196263158), (31.574957677, -4.098028822), (29.616130423, -3.175))
            make_face()
            with BuildLine():
                Line((-3.175, -29.616130423), (-3.175000003, -3.175000002))
                Line((-3.175000003, -3.175000002), (-29.616130423, -3.175))
                ThreePointArc((-29.616130423, -3.175), (-31.574957677, -4.098028822), (-32.110120354, -6.196263158))
                ThreePointArc((-32.110120354, -6.196263158), (-23.124159512, -23.124159512), (-6.196263158, -32.110120354))
                ThreePointArc((-6.196263158, -32.110120354), (-4.098028822, -31.574957677), (-3.175, -29.616130423))
            make_face()
        extrude(amount=FILLET1_4_DEPTH, mode=Mode.SUBTRACT)


solid = part.part
